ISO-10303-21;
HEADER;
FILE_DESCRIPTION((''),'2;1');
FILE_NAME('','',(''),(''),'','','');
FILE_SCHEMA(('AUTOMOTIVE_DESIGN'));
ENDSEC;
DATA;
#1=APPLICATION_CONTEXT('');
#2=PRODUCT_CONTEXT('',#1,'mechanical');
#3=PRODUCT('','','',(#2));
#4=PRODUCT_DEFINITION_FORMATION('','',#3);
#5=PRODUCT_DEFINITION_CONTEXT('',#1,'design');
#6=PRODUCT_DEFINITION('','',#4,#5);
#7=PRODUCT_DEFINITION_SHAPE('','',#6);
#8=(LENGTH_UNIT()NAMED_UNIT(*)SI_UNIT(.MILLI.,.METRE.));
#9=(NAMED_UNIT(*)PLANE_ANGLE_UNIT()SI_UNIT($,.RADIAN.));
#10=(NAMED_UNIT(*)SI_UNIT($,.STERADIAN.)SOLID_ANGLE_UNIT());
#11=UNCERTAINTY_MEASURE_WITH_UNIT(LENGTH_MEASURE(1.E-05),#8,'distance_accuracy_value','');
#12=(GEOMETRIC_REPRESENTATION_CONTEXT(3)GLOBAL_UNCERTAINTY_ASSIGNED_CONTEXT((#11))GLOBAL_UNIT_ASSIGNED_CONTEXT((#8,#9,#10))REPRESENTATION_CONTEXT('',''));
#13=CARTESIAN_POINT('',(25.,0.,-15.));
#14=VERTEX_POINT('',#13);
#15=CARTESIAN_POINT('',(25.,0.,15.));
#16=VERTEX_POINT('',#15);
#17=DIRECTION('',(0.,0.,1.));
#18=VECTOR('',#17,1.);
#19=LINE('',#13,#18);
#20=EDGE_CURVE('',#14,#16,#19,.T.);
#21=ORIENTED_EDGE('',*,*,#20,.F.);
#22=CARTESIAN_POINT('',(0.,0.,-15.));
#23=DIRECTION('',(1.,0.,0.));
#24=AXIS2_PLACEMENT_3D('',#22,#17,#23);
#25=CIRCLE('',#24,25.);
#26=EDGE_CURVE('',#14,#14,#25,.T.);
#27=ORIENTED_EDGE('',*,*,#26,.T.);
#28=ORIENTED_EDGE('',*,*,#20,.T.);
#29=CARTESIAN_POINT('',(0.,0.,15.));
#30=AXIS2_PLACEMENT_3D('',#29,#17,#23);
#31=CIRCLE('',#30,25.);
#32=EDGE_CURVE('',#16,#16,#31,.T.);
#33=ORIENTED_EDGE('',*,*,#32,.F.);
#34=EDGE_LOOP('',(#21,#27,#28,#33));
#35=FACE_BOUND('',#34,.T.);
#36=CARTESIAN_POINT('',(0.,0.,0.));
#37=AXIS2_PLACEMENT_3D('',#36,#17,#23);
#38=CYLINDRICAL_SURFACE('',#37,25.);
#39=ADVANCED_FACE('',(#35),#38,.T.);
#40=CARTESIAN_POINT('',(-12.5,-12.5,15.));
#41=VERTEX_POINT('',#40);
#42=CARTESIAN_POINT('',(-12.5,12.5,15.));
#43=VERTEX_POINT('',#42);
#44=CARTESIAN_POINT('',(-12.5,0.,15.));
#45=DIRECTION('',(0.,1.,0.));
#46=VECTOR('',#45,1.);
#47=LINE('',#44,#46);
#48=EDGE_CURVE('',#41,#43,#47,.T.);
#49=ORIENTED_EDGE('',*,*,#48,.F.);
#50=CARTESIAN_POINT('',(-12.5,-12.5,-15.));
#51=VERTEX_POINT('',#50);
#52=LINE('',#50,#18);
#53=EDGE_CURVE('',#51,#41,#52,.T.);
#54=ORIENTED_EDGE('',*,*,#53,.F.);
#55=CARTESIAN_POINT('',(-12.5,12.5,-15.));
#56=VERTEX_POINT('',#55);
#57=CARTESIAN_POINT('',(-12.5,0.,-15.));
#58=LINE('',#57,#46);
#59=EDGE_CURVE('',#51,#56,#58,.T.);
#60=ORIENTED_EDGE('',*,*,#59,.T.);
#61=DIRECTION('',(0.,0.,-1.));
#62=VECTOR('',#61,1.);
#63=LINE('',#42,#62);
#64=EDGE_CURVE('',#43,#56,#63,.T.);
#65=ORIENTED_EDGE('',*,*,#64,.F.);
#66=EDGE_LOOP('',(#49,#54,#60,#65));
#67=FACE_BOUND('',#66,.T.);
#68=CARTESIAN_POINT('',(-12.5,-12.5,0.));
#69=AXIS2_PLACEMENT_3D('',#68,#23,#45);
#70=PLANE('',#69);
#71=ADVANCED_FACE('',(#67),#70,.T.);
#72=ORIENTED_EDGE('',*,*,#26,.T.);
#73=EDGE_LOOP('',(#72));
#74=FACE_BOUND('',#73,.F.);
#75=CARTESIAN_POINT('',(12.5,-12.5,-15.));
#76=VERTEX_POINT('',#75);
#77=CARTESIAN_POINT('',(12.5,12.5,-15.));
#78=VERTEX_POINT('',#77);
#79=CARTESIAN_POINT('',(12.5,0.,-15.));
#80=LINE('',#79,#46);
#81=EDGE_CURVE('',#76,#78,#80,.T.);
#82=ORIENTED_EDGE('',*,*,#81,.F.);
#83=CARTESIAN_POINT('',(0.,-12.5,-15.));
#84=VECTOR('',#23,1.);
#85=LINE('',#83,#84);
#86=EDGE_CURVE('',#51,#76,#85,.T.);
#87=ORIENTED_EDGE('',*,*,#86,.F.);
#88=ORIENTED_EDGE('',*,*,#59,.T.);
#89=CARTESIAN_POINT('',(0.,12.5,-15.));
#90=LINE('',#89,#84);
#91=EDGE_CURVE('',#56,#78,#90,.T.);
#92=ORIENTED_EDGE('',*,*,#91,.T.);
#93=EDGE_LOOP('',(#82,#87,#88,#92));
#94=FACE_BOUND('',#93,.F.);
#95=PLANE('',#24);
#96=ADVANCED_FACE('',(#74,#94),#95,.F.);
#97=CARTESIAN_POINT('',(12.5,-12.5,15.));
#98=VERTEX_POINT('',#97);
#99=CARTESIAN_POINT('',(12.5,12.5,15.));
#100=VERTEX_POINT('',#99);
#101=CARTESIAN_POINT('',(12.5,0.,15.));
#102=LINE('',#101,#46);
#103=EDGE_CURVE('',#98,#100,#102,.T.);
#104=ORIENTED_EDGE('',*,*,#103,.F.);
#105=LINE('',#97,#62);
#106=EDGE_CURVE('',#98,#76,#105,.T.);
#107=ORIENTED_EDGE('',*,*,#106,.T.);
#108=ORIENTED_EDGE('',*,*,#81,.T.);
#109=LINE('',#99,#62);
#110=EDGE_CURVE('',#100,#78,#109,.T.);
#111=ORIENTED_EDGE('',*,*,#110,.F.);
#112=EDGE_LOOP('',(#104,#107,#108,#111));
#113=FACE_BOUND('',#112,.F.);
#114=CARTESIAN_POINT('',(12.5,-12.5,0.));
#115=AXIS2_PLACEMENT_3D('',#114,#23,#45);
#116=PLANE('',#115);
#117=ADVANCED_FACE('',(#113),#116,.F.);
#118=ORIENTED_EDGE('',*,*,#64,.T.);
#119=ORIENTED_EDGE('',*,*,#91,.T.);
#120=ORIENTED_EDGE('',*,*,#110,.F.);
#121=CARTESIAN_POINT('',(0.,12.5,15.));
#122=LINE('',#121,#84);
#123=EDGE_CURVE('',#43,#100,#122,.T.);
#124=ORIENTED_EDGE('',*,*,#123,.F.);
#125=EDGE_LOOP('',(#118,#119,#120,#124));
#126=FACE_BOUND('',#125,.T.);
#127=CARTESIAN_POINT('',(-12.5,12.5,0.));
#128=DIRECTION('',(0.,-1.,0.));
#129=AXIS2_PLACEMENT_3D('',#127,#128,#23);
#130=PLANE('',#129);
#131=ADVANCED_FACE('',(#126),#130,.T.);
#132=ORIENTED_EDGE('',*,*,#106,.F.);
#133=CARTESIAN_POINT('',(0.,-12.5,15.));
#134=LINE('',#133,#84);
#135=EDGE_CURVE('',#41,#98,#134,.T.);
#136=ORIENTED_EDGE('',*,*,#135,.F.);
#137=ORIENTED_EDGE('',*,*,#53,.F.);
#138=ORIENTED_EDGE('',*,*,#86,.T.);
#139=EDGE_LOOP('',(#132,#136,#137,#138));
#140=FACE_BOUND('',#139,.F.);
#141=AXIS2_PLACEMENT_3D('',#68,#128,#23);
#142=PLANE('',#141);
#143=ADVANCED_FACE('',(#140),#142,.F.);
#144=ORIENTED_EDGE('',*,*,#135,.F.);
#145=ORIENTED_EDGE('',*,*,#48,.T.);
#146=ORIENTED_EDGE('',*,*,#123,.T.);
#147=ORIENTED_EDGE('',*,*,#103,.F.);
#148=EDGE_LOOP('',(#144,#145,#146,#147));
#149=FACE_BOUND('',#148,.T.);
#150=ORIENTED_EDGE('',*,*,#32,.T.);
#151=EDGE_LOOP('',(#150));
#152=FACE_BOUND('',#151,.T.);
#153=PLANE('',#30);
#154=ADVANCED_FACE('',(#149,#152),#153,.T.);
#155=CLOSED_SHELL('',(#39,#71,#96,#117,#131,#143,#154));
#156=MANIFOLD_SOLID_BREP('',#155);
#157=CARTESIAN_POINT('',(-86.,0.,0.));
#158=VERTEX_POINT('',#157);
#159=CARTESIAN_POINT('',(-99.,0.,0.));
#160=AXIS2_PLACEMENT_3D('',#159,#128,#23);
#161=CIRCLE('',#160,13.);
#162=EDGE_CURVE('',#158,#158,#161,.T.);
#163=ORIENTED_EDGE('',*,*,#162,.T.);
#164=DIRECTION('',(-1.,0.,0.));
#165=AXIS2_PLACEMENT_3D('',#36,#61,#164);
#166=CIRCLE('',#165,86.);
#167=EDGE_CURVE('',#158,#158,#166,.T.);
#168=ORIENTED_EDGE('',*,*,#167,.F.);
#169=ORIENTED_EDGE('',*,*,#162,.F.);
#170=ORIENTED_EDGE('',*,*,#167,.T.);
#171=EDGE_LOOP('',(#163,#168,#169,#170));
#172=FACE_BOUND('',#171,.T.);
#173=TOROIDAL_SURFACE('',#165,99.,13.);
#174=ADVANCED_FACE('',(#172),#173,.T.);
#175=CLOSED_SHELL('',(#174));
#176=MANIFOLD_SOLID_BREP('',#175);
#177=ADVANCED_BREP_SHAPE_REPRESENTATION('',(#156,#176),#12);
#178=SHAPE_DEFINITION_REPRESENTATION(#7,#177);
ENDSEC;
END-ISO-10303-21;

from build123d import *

# Parameters (mm, degrees)
F0_R     = 13
F2_R     = 25
F2_W     = 25
F2_H     = 25
F3_DEPTH = 15


# Not quite as in the source:
# - a feature of the source that left no trace in its solid (it failed there, or was rolled back) is left out
# - the program builds the solid bodies; features that only make, move or delete a surface that nothing else refers to are left out


with BuildPart() as f1:
    # F0 (on Front) → F1 (revolve)
    with BuildSketch(Plane.XZ):
        with Locations((-99, 0)):
            Circle(F0_R)
    revolve(axis=Axis((0, 0, -6.8144798279), (0, 0, -1)))


with BuildPart() as f3:
    # F2 (on Top) → F3 (new body, symmetric)
    with BuildSketch(Plane.XY):
        Circle(F2_R)
        Rectangle(F2_W, F2_H, mode=Mode.SUBTRACT)
    extrude(amount=F3_DEPTH, both=True)


solid = Compound([f1.part, f3.part])
